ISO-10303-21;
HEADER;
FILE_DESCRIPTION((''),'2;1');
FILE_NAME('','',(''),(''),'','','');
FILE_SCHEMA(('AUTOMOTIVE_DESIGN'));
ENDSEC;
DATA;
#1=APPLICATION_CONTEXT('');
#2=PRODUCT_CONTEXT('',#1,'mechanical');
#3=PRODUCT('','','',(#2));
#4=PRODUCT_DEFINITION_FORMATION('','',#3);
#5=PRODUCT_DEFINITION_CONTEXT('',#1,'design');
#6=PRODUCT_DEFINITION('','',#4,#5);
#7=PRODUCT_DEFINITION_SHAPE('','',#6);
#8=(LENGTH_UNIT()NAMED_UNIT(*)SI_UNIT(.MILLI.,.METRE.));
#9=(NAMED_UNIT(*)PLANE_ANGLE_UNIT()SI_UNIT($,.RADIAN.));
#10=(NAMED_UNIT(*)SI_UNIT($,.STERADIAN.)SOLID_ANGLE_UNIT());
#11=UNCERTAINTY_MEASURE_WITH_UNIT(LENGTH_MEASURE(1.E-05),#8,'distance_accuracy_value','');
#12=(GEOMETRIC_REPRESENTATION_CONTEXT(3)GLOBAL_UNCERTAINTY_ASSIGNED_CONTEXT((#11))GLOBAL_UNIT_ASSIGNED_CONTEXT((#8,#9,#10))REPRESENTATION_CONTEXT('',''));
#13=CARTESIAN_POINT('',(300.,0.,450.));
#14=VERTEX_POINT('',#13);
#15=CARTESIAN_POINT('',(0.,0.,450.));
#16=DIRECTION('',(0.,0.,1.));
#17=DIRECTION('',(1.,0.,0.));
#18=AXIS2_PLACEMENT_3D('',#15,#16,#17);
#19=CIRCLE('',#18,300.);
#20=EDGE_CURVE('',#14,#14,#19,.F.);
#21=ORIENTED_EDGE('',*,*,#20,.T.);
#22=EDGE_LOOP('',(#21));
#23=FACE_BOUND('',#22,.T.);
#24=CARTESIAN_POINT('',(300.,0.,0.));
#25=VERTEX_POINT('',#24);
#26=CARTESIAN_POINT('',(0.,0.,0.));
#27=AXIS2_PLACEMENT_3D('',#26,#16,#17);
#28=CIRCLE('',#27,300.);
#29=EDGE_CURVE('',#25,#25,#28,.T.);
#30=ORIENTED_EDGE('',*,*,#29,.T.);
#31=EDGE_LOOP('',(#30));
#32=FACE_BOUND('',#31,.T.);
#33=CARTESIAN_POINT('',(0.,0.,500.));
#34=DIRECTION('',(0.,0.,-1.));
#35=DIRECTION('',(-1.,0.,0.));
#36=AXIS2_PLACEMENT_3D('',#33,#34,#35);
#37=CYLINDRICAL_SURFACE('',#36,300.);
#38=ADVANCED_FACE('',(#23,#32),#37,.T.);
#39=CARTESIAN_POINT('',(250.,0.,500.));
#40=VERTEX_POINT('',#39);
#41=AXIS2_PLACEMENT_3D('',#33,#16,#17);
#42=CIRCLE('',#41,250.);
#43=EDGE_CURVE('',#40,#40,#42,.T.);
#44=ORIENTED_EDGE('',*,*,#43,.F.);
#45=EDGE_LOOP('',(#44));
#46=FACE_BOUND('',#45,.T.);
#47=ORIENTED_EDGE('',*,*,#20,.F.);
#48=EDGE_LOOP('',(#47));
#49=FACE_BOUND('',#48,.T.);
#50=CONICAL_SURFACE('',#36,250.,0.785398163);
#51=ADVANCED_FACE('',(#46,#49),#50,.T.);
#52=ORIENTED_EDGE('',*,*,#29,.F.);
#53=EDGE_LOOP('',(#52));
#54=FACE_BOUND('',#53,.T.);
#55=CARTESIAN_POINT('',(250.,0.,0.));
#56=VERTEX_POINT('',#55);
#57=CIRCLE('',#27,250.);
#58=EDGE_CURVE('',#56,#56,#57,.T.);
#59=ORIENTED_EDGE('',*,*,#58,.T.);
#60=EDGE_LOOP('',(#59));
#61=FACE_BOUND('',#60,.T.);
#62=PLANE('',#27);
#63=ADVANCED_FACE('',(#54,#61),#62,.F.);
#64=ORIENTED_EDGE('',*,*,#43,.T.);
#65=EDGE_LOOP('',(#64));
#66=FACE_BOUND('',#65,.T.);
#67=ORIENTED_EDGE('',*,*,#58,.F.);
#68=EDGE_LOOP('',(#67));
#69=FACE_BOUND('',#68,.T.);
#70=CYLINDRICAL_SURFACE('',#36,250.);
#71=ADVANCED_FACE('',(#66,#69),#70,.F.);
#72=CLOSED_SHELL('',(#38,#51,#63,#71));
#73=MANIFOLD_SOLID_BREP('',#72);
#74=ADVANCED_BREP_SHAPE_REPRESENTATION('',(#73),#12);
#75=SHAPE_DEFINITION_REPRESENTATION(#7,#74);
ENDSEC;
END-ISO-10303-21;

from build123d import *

# Parameters (mm, degrees)
SKETCH2_R           = 300
SKETCH2_R_2         = 250
BOSS_EXTRUDE1_DEPTH = 500
CHAMFER1_SIZE       = 50


with BuildPart() as part:
    # Sketch2 → Boss-Extrude1 (new body)
    with BuildSketch(Plane.XY):
        Circle(SKETCH2_R)
        Circle(SKETCH2_R_2, mode=Mode.SUBTRACT)
    extrude(amount=BOSS_EXTRUDE1_DEPTH)

    # Chamfer1
    chamfer1_edges = [part.edges().sort_by_distance(p)[0] for p in [
        (-300, 0, 500),
    ]]
    chamfer(chamfer1_edges, length=CHAMFER1_SIZE - 0.0001)  # a hair under: the kernel refuses the full size


solid = part.part
